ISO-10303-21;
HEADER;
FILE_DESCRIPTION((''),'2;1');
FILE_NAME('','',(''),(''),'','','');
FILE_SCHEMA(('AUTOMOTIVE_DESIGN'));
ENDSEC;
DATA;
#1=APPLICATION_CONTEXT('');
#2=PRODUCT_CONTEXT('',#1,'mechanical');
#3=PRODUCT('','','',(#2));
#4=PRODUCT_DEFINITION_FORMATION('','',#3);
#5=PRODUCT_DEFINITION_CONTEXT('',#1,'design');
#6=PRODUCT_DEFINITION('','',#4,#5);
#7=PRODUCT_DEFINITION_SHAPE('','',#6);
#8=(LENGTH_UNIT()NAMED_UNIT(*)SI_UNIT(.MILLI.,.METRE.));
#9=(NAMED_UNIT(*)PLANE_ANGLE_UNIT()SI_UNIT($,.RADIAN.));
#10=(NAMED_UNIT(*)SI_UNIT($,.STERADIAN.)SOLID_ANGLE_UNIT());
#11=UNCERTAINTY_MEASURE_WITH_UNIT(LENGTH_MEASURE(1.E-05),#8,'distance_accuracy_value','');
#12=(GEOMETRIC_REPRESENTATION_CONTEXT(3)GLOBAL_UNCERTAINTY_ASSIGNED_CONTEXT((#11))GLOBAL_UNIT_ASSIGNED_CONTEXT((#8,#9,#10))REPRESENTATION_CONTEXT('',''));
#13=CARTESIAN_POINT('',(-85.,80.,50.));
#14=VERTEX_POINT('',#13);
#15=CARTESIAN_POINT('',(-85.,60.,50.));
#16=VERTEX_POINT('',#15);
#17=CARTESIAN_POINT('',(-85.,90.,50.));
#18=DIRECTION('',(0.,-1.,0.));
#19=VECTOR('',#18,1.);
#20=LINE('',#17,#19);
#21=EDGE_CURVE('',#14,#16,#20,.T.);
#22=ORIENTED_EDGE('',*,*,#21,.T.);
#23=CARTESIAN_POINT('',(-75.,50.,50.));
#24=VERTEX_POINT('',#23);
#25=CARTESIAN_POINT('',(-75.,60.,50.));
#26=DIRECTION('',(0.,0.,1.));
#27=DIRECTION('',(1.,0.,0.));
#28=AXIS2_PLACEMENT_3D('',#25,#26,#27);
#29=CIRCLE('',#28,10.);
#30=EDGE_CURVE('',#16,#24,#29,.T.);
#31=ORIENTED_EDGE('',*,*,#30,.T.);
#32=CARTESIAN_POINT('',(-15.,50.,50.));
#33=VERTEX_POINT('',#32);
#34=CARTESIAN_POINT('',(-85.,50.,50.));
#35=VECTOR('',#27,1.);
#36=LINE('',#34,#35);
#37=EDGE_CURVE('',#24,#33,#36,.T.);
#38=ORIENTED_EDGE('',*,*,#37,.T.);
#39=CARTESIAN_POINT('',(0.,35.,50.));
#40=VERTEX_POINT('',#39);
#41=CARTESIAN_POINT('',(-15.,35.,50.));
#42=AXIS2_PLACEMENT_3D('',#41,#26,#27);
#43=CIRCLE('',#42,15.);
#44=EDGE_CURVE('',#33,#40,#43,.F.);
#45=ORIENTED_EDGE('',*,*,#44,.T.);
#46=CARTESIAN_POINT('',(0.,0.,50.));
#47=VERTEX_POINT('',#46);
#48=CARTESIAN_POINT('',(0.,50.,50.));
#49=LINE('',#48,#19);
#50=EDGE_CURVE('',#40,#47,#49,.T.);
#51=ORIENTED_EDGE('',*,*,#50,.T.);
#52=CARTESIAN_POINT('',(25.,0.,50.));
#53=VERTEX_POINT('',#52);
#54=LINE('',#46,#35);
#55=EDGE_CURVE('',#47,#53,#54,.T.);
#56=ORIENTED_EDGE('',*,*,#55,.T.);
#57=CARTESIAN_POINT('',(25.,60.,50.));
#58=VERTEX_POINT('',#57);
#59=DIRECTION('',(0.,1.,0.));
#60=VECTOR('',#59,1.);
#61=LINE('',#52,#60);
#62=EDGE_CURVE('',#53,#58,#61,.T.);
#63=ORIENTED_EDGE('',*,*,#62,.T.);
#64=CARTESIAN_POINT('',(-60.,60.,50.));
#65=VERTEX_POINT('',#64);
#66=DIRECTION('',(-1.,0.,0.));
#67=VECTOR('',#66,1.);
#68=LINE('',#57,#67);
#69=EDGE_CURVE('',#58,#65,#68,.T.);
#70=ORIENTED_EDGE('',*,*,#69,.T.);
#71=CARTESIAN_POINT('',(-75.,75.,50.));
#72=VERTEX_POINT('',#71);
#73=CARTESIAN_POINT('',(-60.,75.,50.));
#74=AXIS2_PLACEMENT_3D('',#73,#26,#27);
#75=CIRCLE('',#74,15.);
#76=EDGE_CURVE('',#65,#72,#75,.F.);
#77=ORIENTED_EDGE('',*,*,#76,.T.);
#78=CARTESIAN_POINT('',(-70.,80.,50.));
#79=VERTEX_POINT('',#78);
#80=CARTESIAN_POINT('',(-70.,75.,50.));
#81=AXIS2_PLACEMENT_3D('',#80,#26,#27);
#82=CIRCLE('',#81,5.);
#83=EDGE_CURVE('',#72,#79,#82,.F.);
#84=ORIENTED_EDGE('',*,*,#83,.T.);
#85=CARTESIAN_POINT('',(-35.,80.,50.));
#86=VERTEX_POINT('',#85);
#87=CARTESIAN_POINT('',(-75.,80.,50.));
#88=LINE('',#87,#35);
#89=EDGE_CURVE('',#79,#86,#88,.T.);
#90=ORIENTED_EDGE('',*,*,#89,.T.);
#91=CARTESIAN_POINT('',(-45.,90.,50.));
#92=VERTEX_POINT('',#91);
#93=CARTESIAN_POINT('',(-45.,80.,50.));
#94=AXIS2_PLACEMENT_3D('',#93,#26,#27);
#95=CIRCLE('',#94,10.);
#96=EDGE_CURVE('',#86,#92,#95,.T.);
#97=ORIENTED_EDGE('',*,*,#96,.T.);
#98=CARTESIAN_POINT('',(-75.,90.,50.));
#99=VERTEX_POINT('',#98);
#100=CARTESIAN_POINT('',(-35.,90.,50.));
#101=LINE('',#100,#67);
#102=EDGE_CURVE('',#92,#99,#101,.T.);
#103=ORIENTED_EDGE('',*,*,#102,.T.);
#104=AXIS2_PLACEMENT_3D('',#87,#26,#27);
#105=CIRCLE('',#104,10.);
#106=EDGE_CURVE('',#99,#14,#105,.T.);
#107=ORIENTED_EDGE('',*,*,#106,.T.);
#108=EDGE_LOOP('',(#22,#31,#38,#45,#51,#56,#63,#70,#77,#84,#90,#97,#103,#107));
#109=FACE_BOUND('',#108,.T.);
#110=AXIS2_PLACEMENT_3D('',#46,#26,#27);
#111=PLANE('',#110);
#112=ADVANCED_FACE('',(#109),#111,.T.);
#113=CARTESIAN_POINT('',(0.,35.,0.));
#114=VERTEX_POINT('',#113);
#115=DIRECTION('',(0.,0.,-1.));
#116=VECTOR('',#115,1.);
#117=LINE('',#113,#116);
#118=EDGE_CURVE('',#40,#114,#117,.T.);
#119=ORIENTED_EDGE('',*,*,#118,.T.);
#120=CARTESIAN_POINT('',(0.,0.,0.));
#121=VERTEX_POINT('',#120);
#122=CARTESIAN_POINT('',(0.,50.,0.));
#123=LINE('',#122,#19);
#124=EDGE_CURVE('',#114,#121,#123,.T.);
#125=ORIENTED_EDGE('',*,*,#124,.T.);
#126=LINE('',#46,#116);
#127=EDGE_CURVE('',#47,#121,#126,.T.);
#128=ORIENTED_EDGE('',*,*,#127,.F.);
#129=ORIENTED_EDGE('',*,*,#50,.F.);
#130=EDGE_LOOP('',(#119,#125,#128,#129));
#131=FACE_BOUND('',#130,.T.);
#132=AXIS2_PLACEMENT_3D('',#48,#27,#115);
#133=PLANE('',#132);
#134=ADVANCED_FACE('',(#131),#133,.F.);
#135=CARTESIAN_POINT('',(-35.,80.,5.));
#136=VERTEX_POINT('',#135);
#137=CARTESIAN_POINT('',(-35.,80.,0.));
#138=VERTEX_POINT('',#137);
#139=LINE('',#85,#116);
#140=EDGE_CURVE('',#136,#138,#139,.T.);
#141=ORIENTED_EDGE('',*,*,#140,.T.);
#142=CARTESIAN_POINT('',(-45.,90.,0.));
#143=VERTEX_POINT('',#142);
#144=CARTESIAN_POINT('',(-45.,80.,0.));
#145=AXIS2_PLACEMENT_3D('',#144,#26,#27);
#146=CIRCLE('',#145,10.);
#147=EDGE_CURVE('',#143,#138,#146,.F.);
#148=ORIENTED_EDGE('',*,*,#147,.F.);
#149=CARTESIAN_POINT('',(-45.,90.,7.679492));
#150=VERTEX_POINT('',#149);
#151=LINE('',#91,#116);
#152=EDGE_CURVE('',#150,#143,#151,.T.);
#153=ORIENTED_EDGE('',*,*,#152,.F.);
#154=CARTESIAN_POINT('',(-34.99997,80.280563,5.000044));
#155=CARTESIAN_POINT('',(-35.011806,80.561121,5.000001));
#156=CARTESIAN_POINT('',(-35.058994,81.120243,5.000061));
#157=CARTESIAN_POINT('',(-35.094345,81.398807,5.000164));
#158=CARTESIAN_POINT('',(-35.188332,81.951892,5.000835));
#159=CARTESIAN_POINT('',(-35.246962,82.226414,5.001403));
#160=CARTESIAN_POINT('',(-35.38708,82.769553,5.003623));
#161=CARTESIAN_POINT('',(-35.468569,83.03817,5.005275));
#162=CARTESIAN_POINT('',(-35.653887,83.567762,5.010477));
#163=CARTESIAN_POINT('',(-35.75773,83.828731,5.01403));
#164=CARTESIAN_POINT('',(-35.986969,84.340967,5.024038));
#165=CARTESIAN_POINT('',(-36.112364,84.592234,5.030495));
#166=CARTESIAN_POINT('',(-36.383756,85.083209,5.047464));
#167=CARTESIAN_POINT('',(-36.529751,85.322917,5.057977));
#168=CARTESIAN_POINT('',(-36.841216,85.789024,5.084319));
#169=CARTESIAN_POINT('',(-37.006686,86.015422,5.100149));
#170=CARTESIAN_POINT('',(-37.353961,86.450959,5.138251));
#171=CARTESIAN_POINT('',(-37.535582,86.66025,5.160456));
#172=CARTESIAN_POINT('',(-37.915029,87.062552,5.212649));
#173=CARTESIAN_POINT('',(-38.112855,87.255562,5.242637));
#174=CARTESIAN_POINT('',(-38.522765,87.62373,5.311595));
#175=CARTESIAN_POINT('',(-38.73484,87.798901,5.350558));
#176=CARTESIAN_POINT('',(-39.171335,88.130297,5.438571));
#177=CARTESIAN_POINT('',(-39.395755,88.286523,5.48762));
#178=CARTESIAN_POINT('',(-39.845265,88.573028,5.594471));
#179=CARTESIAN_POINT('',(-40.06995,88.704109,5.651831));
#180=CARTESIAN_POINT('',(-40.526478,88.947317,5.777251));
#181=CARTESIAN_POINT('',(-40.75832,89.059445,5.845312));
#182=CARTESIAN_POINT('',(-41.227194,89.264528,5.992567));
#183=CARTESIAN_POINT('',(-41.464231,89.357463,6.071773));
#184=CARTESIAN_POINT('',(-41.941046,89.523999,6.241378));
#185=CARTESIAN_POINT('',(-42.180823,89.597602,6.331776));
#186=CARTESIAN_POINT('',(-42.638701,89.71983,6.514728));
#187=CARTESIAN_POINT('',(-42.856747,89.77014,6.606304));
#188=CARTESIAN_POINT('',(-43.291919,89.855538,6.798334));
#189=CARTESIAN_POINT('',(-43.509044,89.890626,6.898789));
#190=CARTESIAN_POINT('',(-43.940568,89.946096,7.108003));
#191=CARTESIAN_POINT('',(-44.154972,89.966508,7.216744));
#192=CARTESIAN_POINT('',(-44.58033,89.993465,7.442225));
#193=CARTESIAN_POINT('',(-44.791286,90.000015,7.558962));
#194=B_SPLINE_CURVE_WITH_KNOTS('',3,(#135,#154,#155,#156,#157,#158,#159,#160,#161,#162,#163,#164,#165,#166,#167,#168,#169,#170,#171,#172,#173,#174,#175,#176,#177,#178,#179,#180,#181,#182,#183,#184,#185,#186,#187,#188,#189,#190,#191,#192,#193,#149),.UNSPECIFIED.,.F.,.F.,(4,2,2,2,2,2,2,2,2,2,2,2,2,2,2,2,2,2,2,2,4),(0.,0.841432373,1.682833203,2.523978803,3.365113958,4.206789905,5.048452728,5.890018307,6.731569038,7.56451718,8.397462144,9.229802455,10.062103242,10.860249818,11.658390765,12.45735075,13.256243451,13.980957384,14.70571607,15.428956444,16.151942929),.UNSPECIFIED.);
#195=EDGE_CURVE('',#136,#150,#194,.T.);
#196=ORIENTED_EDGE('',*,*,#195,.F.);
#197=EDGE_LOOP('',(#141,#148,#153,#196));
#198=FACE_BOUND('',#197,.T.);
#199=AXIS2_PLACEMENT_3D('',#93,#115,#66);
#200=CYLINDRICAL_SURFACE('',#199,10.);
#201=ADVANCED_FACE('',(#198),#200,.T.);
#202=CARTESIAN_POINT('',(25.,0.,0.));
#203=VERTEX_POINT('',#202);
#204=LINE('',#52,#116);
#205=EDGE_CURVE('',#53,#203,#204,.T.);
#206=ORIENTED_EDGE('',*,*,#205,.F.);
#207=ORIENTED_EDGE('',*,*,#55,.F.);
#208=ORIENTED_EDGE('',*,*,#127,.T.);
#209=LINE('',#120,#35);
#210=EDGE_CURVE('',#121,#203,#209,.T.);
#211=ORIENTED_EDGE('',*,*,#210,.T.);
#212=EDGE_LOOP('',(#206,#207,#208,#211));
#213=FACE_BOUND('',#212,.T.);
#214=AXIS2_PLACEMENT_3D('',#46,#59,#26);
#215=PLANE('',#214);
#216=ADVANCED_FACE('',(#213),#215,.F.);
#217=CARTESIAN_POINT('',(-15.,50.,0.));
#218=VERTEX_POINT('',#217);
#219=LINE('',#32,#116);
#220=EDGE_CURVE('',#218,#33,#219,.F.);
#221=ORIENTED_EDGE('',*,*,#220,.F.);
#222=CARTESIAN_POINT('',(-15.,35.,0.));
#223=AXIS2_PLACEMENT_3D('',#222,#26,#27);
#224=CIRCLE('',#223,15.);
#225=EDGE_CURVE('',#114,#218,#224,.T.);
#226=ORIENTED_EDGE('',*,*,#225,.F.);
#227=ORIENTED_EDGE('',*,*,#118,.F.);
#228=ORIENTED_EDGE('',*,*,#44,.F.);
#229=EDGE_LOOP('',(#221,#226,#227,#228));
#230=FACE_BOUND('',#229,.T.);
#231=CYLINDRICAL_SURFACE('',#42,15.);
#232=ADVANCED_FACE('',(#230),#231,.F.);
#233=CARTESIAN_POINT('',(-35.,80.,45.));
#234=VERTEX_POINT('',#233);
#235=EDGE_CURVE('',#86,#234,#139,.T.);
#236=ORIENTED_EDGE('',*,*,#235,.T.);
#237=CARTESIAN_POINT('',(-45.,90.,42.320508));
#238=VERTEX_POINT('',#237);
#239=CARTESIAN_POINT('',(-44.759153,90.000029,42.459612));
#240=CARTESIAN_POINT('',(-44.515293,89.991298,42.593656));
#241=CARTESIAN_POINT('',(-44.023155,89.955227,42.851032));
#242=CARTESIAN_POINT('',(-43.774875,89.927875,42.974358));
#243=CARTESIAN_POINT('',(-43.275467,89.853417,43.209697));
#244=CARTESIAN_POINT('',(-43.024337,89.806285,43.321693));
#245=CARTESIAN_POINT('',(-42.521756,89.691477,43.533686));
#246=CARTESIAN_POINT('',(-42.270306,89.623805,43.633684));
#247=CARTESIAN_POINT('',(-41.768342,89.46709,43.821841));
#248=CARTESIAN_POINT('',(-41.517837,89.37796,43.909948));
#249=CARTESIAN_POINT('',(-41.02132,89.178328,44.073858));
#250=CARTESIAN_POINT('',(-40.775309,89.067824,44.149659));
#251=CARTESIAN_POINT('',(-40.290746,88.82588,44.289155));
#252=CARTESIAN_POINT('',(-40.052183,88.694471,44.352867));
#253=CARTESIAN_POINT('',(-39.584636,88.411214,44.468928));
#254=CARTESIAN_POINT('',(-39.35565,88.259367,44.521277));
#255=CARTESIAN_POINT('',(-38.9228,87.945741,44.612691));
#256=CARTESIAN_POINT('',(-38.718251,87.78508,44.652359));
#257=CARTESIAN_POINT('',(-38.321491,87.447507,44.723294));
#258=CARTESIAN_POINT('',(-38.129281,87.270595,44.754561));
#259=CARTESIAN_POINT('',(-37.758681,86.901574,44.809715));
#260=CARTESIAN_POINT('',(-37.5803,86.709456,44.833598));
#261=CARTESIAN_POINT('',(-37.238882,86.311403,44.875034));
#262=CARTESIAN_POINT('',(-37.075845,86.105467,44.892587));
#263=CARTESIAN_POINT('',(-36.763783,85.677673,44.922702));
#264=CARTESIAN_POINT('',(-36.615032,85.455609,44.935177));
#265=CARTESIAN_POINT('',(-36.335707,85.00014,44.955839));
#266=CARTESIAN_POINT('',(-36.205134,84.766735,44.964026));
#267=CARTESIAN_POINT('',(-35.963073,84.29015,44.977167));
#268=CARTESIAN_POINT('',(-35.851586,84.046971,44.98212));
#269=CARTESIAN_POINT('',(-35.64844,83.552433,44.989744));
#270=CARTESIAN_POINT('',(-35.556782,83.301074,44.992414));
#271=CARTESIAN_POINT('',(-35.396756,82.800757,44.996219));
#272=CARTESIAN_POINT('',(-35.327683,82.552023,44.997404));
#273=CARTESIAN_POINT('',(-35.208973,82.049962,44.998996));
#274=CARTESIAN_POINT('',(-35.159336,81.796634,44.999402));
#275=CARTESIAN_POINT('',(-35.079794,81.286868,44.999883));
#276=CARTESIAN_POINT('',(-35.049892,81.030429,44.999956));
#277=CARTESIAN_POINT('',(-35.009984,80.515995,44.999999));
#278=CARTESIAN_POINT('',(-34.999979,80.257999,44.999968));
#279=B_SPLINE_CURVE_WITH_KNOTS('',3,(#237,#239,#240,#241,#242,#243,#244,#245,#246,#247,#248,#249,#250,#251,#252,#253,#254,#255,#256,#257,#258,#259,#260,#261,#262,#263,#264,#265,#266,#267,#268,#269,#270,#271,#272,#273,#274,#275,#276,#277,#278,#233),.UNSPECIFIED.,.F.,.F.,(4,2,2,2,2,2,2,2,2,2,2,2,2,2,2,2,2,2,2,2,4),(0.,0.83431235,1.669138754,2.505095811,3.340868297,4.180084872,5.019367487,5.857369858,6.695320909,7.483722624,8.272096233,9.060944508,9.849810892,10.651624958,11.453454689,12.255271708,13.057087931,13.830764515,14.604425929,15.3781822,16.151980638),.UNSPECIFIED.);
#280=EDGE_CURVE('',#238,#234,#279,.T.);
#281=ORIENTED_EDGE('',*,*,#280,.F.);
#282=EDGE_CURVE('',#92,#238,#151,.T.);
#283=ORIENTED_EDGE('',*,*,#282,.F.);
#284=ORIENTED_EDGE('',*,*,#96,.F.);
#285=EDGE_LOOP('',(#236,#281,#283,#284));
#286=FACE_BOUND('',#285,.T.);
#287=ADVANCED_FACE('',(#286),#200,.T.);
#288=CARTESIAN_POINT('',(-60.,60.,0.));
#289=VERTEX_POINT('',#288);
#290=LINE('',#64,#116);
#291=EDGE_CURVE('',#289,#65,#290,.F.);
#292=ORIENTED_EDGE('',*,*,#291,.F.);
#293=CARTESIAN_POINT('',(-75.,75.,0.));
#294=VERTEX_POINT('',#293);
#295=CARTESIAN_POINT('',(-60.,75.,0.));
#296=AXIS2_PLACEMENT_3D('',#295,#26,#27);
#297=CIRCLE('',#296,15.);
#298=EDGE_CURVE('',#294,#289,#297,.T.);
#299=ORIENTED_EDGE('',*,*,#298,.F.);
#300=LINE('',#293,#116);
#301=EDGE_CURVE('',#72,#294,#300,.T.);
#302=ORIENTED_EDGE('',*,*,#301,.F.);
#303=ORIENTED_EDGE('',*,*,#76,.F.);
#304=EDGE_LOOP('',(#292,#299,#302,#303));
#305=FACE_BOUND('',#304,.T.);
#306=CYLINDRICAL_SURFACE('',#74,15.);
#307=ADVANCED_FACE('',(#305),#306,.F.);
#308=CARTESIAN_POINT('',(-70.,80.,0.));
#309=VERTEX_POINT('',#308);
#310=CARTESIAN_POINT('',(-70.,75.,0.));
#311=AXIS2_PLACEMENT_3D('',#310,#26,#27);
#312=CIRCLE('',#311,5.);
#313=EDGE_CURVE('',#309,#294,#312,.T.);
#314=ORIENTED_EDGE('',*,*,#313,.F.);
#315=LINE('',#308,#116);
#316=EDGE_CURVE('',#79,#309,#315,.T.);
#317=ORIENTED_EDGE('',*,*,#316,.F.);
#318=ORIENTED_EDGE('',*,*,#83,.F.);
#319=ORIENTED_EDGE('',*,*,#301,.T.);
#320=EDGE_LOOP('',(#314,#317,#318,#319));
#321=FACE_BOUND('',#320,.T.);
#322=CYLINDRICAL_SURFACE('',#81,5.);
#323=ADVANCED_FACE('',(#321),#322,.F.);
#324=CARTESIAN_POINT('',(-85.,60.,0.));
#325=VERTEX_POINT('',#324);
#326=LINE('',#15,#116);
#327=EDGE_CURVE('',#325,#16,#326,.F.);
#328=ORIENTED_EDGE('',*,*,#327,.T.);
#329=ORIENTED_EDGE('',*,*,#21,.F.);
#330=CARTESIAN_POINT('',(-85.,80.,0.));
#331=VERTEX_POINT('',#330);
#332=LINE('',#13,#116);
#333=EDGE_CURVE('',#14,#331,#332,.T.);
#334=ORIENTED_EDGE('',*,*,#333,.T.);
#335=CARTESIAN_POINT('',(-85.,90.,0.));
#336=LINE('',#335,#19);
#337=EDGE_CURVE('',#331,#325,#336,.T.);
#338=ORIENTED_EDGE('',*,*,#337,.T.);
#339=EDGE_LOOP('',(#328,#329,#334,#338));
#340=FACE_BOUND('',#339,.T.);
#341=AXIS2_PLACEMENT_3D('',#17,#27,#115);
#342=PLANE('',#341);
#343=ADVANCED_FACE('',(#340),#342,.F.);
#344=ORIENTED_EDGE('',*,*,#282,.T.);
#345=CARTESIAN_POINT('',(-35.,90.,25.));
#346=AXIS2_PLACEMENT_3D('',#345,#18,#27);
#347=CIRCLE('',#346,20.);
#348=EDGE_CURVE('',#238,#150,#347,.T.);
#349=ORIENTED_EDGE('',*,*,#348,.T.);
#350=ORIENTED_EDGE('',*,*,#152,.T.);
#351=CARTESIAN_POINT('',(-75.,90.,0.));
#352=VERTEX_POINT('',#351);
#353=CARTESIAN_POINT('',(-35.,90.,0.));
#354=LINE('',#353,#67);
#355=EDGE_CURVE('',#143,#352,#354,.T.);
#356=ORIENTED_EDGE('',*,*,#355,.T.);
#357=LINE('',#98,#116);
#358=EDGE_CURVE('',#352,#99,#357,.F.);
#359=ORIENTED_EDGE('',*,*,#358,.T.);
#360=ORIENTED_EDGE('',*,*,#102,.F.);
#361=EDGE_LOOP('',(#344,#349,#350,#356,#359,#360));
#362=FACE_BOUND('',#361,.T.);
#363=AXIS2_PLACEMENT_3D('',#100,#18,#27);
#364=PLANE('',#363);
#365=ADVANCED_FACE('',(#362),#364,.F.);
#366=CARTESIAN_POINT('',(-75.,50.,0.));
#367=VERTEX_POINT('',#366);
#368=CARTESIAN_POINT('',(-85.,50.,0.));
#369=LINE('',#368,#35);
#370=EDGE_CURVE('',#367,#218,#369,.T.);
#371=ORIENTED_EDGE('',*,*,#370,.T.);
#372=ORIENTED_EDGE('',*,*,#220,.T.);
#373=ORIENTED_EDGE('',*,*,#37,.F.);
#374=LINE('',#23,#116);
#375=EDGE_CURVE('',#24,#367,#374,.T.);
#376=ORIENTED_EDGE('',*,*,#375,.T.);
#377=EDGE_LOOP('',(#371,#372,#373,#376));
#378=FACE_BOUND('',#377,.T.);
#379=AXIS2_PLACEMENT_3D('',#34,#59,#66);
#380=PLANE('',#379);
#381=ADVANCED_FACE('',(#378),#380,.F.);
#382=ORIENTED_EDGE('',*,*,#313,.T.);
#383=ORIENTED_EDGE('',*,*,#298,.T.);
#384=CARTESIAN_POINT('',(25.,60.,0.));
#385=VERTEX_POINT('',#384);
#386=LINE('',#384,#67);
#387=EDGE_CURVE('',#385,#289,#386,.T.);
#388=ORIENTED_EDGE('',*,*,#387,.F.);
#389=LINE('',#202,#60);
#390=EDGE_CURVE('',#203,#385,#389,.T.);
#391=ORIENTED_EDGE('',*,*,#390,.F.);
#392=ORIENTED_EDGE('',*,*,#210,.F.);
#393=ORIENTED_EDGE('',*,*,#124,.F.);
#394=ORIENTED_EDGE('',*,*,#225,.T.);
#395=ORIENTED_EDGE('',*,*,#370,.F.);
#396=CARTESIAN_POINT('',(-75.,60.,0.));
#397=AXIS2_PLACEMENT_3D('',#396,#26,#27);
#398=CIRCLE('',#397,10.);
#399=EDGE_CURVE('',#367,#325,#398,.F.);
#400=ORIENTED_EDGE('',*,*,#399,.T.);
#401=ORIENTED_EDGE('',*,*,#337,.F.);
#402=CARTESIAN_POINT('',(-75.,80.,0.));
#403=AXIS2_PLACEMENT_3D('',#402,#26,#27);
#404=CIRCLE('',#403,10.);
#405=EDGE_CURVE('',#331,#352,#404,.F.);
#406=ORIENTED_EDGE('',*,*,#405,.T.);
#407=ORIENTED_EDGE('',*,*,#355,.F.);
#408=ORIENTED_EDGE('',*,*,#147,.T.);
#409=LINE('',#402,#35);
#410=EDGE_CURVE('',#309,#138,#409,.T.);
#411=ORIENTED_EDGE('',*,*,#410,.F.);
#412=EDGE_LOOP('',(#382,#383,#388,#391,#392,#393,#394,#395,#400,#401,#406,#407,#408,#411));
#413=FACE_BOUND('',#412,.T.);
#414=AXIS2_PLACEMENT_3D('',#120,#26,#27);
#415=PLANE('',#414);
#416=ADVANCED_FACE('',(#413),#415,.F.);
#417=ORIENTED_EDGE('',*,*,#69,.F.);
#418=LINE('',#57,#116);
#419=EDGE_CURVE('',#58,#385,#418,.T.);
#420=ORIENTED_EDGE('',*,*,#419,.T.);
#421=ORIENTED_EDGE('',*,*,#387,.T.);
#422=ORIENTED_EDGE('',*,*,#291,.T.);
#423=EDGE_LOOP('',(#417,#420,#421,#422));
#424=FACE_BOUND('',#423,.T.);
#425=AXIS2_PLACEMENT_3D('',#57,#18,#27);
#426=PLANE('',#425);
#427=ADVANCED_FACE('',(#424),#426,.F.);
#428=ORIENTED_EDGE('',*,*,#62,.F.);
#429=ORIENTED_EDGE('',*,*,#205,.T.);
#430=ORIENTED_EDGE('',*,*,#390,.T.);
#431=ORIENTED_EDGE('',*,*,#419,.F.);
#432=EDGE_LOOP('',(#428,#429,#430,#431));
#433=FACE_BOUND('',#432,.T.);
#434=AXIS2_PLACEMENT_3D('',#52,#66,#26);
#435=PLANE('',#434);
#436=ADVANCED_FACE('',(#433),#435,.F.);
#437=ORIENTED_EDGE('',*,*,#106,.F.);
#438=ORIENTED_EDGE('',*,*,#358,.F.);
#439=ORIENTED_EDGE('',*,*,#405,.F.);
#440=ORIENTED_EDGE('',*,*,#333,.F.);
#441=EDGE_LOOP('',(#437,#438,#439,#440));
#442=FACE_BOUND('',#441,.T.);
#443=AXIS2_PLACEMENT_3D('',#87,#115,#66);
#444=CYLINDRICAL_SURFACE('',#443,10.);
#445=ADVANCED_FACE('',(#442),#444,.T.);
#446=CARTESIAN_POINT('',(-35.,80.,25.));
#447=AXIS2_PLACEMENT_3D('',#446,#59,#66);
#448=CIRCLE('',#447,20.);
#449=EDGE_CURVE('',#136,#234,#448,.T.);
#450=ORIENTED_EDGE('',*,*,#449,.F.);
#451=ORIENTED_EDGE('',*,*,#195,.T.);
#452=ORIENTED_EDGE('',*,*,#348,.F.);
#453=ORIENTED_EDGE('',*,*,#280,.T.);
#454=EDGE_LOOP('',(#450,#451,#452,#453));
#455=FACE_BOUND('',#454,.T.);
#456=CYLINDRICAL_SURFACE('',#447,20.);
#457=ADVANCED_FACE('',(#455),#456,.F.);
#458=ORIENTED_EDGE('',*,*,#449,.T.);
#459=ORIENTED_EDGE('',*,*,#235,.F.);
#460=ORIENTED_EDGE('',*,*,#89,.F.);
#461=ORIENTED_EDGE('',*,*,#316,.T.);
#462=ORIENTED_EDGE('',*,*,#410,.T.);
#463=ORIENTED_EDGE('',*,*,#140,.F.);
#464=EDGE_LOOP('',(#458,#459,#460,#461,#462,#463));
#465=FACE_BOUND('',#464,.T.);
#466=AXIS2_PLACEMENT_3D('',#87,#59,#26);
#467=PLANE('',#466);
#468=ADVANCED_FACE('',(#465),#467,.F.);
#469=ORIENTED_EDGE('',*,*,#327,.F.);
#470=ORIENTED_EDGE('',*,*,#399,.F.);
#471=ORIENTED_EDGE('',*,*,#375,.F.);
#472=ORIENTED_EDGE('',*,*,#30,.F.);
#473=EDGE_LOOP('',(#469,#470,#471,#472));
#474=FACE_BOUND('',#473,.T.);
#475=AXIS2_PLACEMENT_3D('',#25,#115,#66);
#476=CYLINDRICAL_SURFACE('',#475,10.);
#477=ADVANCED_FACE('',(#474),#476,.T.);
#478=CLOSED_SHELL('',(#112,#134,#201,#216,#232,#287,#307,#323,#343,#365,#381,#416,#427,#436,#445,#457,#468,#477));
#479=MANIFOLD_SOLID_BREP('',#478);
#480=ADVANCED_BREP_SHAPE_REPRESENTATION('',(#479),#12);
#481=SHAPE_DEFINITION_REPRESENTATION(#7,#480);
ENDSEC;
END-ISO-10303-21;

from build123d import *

# Parameters (mm, degrees)
BOSS_EXTRU_1_DEPTH      = 50
ESQUISSE3_R             = 20
ENL_V_MAT_EXTRU_1_DEPTH = 10
CONG_1_R                = 15
CONG_2_R                = 5
CONG_4_R                = 10
CONG_5_R                = 10


with BuildPart() as part:
    # Esquisse2 → Boss.-Extru.1 (new body)
    with BuildSketch(Plane.XY):
        Polygon((-35, 90), (-85, 90), (-85, 50), (0, 50), (0, 0), (25, 0), (25, 60), (-75, 60), (-75, 80), (-35, 80), align=None)
    extrude(amount=BOSS_EXTRU_1_DEPTH)

    # Esquisse3 → Enlèv. mat.-Extru.1 (cut)
    with BuildSketch(Plane(origin=(0, 90, 0), x_dir=(1, 0, 0), z_dir=(0, 1, 0))):
        with Locations((-35, -25)):
            Circle(ESQUISSE3_R)
    extrude(amount=-ENL_V_MAT_EXTRU_1_DEPTH, mode=Mode.SUBTRACT)

    # Congé1
    cong_1_edges = [part.edges().sort_by_distance(p)[0] for p in [
        (0, 50, 25),
        (-75, 60, 25),
    ]]
    fillet(cong_1_edges, radius=CONG_1_R)

    # Congé2
    cong_2_edges = [part.edges().sort_by_distance(p)[0] for p in [
        (-75, 80, 25),
    ]]
    fillet(cong_2_edges, radius=CONG_2_R - 0.0001)  # a hair under: the kernel refuses the full size

    # Congé4
    cong_4_edges = [part.edges().sort_by_distance(p)[0] for p in [
        (-85, 50, 25),
        (-85, 90, 25),
    ]]
    fillet(cong_4_edges, radius=CONG_4_R)

    # Congé5
    cong_5_edges = [part.edges().sort_by_distance(p)[0] for p in [
        (-35, 90, 2.5),
        (-35, 90, 47.5),
    ]]
    fillet(cong_5_edges, radius=CONG_5_R - 0.0001)  # a hair under: the kernel refuses the full size


solid = part.part
